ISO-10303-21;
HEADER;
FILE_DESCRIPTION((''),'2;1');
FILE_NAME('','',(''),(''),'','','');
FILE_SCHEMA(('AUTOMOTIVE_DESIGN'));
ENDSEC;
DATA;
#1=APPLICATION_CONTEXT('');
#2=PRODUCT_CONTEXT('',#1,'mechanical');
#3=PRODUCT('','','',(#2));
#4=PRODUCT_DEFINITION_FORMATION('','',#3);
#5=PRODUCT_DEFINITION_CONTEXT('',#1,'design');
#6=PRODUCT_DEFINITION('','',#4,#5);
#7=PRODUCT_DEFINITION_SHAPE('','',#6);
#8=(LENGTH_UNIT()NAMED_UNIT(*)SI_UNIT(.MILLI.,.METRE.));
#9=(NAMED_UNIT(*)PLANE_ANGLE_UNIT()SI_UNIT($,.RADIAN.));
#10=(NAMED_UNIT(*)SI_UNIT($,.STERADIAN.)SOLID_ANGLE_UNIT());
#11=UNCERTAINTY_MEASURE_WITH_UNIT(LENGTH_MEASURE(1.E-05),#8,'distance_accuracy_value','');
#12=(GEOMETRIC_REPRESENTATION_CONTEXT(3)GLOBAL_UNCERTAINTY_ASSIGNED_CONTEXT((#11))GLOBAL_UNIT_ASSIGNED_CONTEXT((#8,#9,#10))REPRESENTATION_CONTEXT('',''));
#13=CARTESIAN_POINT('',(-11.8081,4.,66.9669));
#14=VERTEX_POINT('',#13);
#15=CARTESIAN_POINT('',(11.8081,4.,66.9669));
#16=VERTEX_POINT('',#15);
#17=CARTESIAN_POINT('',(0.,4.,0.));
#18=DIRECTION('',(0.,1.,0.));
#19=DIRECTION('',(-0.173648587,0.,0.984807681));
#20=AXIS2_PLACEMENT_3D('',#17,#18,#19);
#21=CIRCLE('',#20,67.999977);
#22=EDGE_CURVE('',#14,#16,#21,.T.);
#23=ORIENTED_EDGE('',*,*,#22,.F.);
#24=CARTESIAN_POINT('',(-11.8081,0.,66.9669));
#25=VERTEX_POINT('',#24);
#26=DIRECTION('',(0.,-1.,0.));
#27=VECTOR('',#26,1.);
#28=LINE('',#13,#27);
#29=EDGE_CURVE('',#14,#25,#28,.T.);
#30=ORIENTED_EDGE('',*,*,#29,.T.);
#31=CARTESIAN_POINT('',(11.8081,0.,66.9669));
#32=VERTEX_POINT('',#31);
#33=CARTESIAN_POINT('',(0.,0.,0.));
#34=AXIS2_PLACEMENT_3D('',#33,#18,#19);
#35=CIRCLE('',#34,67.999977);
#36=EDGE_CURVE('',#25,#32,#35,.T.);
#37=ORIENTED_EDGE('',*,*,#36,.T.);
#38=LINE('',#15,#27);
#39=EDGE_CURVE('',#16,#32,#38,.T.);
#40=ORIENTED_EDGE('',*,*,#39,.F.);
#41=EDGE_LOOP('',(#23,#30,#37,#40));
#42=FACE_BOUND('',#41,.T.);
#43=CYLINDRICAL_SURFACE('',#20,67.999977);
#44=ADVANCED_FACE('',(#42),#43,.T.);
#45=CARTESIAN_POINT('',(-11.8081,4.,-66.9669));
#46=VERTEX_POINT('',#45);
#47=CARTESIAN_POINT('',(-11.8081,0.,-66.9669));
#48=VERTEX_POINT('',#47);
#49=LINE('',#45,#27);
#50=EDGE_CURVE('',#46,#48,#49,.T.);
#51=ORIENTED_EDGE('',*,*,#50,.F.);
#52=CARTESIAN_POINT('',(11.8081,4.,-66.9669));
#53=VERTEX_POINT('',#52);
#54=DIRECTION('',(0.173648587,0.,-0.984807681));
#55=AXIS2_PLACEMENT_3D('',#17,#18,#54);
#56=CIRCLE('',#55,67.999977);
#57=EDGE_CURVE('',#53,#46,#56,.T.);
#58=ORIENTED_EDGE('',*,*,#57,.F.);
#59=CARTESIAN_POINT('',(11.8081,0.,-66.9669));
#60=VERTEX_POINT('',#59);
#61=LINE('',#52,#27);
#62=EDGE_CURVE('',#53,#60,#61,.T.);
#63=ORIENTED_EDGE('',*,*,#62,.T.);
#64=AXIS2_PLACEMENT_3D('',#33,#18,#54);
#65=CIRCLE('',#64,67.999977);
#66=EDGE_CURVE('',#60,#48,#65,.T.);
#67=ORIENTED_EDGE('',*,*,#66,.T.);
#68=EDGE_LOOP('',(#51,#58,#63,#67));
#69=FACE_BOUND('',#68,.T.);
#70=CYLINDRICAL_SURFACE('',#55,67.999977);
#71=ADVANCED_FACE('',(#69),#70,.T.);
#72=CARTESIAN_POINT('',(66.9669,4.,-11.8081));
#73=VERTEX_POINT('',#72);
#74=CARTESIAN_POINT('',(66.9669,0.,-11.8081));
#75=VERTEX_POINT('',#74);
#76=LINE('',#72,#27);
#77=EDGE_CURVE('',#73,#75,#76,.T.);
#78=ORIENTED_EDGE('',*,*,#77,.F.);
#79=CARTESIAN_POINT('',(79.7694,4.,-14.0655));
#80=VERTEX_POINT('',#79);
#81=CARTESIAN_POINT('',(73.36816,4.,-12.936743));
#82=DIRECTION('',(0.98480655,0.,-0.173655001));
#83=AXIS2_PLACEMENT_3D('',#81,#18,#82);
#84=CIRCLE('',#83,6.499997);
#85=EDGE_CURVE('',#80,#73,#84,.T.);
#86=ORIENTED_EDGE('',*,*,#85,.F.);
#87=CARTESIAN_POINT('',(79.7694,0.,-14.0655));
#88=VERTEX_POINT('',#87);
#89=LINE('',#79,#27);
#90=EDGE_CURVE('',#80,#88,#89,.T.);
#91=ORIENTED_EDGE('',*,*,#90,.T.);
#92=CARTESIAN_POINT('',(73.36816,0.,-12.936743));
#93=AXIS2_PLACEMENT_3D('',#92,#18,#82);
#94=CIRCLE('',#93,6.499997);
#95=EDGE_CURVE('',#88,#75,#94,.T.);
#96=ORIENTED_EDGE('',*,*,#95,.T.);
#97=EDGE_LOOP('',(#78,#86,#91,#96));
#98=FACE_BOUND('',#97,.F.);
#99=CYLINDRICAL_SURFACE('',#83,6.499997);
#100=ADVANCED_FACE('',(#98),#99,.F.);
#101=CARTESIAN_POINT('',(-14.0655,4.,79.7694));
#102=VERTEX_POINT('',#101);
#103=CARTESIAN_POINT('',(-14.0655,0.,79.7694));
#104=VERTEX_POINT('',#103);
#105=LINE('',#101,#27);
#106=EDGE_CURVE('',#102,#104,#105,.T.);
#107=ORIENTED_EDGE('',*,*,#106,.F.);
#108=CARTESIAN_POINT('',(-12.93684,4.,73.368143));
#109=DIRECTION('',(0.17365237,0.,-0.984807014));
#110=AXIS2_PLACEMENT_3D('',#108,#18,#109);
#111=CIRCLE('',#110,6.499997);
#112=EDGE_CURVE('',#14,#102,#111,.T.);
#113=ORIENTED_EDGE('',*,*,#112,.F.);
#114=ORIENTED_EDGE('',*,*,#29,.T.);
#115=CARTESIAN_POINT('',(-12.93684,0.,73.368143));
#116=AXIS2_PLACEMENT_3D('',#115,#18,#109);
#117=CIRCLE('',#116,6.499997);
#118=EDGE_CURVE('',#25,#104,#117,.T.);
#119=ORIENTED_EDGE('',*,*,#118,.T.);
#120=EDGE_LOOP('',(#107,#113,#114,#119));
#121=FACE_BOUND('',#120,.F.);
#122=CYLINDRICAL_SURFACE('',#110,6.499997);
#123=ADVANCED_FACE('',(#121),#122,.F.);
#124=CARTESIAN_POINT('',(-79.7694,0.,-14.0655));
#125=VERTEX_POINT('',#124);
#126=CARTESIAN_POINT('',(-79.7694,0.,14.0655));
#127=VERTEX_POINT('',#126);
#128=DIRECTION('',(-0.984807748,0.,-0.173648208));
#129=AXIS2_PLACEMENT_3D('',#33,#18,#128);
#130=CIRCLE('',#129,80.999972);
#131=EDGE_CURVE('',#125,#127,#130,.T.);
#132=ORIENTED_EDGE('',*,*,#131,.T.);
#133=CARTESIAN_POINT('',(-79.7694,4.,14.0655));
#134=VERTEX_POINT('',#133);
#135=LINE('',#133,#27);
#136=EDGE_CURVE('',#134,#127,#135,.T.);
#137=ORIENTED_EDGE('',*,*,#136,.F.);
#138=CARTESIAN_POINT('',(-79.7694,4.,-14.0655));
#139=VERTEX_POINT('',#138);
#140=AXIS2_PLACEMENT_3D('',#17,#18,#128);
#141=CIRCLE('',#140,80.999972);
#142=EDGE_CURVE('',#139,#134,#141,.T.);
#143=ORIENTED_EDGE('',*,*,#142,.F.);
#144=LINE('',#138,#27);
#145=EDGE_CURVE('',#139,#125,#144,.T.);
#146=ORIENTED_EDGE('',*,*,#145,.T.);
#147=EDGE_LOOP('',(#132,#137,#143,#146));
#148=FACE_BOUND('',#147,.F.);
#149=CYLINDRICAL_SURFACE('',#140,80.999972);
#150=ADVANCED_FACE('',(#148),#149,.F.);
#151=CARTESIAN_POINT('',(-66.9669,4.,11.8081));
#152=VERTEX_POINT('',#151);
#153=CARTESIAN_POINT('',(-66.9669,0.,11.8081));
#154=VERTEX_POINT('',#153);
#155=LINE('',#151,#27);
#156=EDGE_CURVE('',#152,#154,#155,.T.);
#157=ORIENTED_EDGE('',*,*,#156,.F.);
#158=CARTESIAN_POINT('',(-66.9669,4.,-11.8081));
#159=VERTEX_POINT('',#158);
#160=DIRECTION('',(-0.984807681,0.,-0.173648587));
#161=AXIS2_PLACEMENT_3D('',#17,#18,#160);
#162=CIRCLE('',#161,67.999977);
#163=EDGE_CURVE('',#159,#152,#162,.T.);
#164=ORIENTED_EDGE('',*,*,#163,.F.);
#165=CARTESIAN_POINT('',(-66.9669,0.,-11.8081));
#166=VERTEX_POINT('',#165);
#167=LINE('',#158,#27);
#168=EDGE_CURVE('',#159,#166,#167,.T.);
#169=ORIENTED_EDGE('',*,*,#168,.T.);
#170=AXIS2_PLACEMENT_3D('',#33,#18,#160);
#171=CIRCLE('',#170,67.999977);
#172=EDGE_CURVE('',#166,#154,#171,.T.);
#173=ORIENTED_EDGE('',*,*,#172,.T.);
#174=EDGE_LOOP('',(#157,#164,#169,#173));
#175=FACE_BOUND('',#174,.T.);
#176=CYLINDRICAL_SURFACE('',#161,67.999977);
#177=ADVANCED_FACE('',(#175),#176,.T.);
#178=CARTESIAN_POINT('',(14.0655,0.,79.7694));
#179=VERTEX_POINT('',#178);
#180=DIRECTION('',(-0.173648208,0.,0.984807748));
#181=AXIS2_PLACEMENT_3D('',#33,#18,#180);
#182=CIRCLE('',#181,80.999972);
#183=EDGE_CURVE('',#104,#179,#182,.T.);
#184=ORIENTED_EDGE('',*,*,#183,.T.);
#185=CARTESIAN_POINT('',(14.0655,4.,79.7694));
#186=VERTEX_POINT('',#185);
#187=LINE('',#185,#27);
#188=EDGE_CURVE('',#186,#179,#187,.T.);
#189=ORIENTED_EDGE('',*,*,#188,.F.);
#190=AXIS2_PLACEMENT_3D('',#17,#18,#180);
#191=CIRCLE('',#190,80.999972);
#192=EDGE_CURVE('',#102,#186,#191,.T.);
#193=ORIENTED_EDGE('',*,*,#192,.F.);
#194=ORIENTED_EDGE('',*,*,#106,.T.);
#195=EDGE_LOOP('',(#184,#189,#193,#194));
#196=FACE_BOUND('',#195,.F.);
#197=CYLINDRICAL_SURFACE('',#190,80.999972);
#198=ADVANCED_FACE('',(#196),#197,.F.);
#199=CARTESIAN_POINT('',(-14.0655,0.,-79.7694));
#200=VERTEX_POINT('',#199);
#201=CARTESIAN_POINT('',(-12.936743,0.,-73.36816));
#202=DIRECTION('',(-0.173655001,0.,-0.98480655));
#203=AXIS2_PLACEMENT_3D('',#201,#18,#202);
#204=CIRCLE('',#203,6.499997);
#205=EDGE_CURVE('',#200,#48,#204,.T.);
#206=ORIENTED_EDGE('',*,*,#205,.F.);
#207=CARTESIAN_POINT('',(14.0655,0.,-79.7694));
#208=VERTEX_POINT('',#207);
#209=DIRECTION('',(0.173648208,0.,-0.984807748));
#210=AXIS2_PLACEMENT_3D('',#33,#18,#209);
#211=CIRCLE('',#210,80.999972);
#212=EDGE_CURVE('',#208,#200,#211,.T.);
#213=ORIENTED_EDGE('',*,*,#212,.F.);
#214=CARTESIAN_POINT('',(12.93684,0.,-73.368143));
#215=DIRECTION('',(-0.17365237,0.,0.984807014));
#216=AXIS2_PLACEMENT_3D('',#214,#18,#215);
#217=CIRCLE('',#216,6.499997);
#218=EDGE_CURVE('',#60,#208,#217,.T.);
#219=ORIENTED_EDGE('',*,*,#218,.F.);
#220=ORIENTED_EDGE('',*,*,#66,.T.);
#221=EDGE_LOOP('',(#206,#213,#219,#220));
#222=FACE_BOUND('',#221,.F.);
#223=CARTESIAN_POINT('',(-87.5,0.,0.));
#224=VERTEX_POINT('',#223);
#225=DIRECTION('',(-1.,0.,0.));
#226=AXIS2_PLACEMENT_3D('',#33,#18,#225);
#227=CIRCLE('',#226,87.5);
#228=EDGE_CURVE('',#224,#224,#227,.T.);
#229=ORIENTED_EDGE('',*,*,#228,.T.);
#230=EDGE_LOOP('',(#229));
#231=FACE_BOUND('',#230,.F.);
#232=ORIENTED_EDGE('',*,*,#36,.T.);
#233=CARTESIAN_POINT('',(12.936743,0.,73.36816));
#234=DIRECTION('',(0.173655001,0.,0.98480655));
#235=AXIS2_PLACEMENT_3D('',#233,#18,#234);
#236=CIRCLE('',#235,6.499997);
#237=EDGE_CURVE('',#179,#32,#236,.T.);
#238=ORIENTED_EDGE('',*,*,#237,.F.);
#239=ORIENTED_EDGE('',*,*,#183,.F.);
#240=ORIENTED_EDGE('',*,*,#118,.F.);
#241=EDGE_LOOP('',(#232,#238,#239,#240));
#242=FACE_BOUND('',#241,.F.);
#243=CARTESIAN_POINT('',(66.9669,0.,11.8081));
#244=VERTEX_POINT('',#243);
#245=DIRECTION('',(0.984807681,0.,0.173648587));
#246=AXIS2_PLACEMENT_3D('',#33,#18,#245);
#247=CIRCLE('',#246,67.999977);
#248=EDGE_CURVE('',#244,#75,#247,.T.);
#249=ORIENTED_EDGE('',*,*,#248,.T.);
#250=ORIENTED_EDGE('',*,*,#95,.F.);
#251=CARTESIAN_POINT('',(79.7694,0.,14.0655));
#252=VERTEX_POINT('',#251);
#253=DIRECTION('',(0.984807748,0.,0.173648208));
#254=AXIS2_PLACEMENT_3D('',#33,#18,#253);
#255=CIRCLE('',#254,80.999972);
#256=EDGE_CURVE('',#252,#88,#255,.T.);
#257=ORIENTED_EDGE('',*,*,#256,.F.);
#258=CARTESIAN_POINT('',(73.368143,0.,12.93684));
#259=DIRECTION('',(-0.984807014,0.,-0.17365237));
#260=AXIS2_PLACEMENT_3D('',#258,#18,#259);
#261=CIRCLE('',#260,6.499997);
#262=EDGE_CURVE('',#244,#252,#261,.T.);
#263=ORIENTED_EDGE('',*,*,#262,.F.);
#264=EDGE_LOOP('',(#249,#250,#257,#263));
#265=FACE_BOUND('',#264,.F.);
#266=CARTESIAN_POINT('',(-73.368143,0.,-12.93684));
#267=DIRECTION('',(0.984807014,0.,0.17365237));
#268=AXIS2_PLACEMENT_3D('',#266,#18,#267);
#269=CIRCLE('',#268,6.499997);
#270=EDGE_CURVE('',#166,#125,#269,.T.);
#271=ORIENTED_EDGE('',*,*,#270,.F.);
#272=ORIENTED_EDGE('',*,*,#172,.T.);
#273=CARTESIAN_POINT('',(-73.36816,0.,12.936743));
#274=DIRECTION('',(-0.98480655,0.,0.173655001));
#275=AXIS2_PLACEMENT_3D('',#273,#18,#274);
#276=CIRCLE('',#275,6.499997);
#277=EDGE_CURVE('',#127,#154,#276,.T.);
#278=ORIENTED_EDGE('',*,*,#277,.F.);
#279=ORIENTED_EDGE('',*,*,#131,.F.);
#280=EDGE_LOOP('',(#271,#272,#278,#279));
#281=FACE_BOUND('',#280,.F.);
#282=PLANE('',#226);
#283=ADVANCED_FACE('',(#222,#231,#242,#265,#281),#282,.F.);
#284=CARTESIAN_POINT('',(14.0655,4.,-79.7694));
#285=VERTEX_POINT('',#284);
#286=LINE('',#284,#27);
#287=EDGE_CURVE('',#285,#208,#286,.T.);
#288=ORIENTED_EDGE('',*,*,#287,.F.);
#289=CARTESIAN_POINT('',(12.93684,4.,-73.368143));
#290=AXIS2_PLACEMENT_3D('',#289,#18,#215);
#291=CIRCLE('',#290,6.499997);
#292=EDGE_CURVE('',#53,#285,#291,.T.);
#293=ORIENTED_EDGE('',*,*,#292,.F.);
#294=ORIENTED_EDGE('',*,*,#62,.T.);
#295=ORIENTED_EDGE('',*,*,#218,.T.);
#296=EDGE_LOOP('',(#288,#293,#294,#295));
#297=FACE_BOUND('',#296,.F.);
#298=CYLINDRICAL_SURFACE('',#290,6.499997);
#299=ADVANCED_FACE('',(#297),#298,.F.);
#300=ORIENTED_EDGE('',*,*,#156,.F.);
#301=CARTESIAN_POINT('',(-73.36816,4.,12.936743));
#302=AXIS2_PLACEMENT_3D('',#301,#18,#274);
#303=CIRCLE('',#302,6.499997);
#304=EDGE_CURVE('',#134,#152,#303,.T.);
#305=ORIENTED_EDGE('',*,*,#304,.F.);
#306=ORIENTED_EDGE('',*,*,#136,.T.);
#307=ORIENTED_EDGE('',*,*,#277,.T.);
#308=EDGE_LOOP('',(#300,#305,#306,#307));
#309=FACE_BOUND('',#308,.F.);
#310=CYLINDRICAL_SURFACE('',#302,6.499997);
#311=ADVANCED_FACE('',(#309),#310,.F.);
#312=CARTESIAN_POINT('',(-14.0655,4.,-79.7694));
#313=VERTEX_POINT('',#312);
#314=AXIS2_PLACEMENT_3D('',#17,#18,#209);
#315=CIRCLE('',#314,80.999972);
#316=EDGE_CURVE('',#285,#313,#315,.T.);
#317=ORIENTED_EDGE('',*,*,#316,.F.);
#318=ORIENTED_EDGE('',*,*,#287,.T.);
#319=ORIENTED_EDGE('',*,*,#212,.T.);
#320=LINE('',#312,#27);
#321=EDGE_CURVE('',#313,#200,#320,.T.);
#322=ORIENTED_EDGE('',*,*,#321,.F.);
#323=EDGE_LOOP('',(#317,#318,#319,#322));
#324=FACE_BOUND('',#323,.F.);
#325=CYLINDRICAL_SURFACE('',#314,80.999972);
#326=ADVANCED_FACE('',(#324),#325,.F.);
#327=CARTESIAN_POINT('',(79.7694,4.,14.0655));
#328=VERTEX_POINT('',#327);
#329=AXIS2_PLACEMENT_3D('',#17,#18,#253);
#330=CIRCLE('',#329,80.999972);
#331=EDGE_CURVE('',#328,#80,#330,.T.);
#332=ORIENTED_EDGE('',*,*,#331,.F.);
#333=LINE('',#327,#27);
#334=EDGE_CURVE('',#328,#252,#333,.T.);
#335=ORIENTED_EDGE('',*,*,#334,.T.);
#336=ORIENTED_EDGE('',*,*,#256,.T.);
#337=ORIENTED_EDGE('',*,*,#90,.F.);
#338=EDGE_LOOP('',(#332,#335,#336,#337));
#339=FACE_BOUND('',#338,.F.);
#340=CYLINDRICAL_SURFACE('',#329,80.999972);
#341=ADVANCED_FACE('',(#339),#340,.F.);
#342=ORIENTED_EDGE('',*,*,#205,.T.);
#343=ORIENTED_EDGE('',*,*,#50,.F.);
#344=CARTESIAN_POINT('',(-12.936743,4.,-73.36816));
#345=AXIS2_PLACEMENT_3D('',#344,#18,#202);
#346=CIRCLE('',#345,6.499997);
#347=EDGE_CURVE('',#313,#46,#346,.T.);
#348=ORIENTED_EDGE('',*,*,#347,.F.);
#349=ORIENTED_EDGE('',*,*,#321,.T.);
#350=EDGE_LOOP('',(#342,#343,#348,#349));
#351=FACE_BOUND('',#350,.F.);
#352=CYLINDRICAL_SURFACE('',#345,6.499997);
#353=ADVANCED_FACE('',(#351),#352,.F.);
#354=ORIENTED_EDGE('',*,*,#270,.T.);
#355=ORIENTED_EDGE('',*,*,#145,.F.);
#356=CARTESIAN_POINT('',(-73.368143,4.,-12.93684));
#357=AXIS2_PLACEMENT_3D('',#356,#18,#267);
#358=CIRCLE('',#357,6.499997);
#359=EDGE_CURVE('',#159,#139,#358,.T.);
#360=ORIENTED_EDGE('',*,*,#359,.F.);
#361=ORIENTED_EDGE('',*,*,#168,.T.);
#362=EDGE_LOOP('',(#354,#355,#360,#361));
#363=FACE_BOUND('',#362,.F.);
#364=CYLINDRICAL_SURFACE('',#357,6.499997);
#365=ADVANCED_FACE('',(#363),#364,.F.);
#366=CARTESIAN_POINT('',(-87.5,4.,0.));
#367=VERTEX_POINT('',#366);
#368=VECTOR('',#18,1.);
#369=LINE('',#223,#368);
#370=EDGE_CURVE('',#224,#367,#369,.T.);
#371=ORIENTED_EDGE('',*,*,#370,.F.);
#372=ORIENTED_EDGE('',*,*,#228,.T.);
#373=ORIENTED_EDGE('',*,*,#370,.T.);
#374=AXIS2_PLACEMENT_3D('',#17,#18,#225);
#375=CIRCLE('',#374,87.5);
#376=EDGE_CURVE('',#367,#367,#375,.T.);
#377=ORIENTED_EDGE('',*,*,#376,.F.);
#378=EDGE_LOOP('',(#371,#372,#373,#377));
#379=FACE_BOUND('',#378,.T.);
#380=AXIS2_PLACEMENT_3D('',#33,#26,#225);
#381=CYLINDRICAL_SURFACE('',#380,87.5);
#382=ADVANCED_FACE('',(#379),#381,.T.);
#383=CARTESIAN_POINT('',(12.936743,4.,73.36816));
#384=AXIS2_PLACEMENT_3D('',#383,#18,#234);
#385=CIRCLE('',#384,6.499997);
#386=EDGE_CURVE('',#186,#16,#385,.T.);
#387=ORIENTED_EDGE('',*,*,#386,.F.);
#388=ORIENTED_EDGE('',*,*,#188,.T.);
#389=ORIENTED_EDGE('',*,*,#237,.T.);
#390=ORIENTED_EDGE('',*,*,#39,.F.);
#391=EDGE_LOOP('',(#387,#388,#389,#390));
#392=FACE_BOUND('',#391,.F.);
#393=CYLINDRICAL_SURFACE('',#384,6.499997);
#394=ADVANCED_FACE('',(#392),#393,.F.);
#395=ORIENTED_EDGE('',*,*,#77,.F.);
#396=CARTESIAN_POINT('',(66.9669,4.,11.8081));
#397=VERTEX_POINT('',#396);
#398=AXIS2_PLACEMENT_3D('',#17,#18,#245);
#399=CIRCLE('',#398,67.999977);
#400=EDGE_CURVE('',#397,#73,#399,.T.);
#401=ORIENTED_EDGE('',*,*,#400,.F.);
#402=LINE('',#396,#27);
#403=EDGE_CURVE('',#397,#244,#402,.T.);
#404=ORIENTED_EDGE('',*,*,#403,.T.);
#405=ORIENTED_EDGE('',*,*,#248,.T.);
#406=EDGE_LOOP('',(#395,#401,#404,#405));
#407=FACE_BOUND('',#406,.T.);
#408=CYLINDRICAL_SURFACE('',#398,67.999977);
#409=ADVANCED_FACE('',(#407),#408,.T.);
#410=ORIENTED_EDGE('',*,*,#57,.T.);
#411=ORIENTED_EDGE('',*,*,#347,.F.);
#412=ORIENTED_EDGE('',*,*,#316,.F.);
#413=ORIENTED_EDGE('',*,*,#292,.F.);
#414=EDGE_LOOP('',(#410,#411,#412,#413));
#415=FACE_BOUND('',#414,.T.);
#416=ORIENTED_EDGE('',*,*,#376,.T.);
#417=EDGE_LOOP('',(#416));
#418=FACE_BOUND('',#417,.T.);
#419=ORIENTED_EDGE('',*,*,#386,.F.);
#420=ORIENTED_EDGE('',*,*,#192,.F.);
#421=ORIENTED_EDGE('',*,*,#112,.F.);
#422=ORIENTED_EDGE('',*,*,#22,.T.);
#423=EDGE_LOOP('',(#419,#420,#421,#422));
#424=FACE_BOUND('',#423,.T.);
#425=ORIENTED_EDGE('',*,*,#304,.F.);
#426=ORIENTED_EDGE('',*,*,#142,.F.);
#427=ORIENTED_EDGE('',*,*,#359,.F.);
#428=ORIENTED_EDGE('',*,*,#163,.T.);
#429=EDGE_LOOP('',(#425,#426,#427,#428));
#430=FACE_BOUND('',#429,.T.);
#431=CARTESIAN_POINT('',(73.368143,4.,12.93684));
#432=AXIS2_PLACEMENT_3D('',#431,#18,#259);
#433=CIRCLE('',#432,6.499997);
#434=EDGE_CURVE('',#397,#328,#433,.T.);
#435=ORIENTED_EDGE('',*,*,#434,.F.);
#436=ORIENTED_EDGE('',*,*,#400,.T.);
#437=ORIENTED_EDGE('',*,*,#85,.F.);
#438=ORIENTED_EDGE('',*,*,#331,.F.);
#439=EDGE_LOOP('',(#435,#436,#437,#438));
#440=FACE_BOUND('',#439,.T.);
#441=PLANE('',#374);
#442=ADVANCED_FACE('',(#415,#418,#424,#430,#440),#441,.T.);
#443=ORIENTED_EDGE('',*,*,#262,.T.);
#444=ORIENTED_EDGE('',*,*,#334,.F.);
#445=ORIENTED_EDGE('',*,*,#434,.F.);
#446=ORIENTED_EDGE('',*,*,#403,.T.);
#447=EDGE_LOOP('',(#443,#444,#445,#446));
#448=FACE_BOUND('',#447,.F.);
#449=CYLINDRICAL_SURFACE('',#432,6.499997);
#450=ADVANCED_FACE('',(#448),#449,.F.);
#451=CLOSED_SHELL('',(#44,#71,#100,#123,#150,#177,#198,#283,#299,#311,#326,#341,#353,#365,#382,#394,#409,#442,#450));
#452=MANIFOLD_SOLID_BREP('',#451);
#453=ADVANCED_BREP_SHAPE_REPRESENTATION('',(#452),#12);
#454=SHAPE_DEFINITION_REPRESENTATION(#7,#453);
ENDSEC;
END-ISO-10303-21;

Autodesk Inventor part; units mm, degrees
ref_plane "YZ Plane" through (0, 0, 0) normal (1, 0, 0) x (0, 1, 0)
ref_plane "XZ Plane" through (0, 0, 0) normal (0, 1, 0) x (-1, 0, 0)
ref_plane "XY Plane" through (0, 0, 0) normal (0, 0, 1) x (1, 0, 0)
sketch "Sketch1" plane through (0, 0, 0) normal (0, 1, 0) x (-1, 0, 0)
  circle A0 centre (0, 0) radius 87.5
  dimension "d0" = 175
extrude "Plate1" add sketch "Sketch1" along normal blind 4
sketch "Sketch2" plane through (0, 4, 0) normal (0, 1, 0) x (1, 0, 0)
  circle A0 centre (0, 0) radius 87.5 projected
  arc A1 (73.3682, -12.9368) -> (73.3682, 12.9368) centre (0, 0) ccw construction
  arc A2 (79.7694, -14.0655) -> (79.7694, 14.0655) centre (0, 0) ccw
  arc A3 (66.9669, -11.8081) -> (66.9669, 11.8081) centre (0, 0) ccw
  arc A4 (66.9669, -11.8081) -> (79.7694, -14.0655) centre (73.3682, -12.9368) ccw
  arc A5 (79.7694, 14.0655) -> (66.9669, 11.8081) centre (73.3682, 12.9368) ccw
  point P0 (74.5, 0)
  dimension "d19" = 13
  dimension "d20" = 20
  dimension "d21" = 74.5
extrude "Extrusion1" cut sketch "Sketch2" against normal through all contours A4 A3 A5 A2
pattern_circular "Circular Pattern1" count 4 over 360 about axis through (0, -10, 0) along (0, 1, 0) of "Extrusion1"
sketch "Sketch3" plane through (0, 4, 0) normal (0, 1, 0) x (1, 0, 0)
  line L0 (40.5, 40.5) -> (-40.5, 40.5)
  line L1 (-40.5, 40.5) -> (-40.5, -40.5)
  line L2 (-40.5, -40.5) -> (40.5, -40.5)
  line L3 (40.5, -40.5) -> (40.5, 40.5)
  line L4 (40.5, 40.5) -> (-40.5, -40.5) construction
  line L5 (-40.5, 40.5) -> (40.5, -40.5) construction
  point P0 (0, 0)
  dimension "d22" = 81
mark "Mark1"
equation "\"d1\" = Thickness"
equation "\"BendReliefWidth\" = Thickness"
equation "\"BendReliefDepth\" = 0.5 * Thickness"
equation "\"CornerReliefSize\" = 4 * Thickness"
equation "\"MinimumRemnant\" = 2 * Thickness"
equation "\"TransitionRadius\" = BendRadius"
equation "\"JacobiRadiusSize\" = BendRadius"
equation "\"GapSize\" = Thickness"
equation "\"Thickness\" = 4"
equation "\"BendRadius\" = 6"
properties part number "MSC 906 FLANGE FRAME" material "Stainless Steel"
